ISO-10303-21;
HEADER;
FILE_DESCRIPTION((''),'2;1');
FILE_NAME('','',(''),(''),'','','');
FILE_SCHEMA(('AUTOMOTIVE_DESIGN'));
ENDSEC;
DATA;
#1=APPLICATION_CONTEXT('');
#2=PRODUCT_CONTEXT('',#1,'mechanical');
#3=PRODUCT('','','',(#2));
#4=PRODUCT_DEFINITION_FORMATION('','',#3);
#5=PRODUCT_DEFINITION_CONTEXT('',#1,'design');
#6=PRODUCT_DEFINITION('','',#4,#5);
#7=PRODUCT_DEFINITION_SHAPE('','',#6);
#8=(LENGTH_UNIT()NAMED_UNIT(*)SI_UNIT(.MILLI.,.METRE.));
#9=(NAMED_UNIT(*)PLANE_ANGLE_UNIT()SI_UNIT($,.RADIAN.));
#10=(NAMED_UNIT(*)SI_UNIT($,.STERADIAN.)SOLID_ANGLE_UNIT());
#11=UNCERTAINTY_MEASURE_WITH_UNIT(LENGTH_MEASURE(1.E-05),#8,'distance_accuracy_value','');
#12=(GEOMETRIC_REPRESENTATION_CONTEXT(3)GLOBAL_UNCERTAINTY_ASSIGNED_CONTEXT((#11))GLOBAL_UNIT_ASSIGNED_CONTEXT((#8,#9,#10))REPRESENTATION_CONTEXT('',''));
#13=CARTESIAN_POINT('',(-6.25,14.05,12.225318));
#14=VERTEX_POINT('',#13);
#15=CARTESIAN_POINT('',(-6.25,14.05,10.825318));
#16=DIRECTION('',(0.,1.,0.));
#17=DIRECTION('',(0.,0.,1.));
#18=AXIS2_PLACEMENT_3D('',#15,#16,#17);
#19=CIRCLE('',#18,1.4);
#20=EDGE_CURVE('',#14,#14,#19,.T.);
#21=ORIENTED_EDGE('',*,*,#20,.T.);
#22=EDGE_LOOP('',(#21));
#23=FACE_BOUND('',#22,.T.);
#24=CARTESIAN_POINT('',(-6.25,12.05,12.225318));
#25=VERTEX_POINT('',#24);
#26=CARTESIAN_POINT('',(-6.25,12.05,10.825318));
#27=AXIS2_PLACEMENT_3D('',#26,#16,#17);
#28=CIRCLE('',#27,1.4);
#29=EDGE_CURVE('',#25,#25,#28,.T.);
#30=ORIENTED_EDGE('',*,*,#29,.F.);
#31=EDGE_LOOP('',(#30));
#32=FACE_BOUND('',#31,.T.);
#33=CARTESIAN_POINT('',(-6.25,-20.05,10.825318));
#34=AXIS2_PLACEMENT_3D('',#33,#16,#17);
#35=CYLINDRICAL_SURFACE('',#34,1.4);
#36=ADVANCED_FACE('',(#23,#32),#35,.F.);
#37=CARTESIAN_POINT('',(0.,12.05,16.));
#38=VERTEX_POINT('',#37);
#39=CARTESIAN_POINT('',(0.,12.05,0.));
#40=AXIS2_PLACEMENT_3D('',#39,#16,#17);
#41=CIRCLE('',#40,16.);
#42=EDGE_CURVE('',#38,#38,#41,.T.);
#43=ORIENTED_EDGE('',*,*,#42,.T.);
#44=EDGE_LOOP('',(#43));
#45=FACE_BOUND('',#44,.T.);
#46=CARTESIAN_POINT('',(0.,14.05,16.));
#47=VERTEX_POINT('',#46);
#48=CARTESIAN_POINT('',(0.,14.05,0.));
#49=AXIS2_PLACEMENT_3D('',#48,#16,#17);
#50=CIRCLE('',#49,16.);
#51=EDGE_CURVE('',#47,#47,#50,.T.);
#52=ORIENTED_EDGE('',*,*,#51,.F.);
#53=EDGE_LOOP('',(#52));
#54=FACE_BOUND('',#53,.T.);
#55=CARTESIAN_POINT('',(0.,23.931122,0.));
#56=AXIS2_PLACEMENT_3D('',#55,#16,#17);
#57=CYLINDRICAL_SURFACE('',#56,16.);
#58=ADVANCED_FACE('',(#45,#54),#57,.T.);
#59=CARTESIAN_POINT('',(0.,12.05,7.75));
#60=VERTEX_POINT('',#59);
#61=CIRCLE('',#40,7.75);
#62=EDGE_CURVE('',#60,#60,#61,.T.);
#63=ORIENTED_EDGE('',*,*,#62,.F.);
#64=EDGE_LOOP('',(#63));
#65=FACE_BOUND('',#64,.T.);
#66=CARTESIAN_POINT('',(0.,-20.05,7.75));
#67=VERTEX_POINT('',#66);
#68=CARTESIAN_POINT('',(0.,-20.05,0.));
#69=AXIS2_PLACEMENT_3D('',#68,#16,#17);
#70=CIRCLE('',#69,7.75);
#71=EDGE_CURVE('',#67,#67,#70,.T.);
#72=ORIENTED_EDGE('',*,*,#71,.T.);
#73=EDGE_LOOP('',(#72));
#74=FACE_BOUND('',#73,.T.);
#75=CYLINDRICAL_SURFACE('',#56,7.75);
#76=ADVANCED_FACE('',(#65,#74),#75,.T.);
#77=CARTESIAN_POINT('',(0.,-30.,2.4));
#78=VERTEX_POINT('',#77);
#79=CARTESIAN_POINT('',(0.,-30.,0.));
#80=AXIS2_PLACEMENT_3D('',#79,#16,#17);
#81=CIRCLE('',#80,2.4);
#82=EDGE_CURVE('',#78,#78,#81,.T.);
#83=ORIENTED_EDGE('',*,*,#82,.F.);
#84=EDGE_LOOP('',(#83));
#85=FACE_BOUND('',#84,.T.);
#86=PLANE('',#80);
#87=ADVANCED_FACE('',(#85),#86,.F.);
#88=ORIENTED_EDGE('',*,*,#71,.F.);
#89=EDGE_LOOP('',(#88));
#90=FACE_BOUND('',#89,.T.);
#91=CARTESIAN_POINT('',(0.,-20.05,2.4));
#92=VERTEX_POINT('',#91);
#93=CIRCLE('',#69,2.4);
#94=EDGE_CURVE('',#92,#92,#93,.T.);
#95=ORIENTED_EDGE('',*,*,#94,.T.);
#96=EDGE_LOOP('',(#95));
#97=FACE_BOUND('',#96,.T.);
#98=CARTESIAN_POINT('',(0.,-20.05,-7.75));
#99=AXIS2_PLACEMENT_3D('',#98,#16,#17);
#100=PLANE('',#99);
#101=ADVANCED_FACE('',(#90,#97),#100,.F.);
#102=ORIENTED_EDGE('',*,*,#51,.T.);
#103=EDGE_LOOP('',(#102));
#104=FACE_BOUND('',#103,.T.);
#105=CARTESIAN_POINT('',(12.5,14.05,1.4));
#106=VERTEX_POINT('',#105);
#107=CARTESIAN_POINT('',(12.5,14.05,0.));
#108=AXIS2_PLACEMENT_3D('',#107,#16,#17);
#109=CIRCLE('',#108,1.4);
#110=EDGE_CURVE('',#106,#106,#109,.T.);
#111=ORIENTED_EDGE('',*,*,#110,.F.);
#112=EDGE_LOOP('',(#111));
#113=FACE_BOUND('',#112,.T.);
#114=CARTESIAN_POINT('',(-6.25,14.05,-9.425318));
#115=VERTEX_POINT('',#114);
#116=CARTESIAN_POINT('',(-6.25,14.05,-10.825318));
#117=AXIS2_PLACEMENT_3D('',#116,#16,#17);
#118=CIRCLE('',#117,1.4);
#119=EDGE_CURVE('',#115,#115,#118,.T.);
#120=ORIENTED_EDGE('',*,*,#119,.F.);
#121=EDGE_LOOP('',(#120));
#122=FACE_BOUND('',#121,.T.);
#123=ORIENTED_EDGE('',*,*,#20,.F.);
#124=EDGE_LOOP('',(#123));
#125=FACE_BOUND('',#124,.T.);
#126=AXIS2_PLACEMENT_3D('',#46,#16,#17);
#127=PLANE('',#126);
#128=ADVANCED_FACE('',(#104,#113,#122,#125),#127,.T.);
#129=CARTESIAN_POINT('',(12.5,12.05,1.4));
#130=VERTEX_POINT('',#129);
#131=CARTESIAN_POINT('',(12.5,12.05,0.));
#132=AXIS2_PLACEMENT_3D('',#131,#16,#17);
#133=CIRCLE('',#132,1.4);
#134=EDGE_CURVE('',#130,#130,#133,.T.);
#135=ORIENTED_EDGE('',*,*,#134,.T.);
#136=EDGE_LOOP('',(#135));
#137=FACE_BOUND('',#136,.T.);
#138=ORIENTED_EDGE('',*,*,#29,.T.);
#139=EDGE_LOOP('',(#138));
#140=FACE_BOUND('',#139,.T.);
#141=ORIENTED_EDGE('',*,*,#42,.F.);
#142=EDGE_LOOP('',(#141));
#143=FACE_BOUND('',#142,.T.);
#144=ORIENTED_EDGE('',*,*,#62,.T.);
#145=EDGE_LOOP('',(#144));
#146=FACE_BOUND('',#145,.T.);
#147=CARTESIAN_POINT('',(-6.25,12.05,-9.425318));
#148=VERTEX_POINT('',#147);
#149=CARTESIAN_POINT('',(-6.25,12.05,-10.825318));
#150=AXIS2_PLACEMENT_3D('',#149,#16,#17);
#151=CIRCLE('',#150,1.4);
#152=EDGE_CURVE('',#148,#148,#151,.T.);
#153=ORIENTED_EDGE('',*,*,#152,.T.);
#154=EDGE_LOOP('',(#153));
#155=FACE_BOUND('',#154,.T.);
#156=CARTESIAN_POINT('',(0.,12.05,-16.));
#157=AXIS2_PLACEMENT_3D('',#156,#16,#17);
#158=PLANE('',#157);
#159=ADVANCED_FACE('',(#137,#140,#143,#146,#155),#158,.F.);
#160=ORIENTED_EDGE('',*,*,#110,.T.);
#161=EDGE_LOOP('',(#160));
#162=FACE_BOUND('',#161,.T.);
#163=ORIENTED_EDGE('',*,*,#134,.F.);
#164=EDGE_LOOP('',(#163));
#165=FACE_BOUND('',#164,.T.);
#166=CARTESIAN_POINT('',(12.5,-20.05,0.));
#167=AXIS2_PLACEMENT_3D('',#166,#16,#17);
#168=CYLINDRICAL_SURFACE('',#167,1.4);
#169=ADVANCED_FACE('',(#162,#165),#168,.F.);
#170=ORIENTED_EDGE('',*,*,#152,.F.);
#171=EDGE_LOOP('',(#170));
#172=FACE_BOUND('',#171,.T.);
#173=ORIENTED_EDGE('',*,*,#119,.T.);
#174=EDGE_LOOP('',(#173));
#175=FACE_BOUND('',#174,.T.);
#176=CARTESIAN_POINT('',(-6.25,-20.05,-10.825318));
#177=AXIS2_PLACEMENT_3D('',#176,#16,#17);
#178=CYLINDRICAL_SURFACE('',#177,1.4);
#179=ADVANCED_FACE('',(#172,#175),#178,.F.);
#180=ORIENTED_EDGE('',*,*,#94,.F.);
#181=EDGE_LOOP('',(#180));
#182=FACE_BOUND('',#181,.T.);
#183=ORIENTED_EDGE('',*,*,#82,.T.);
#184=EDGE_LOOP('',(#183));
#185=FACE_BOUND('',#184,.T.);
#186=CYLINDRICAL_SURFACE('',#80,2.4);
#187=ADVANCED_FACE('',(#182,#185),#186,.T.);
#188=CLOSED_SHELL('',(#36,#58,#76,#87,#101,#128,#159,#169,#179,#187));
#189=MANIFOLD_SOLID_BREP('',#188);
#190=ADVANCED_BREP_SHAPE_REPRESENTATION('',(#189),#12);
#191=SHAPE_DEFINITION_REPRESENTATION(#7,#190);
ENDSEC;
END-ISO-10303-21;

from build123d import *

# Parameters (mm, degrees)
CUT_EXTRUDE1_DEPTH      = 41.924442574
CUT_EXTRUDE1_DEPTH_BACK = 41.924442574
SKETCH2_R               = 1.4
SKETCH4_R               = 2.4


with BuildPart() as part:
    # Sketch1 → Revolve1 (revolve)
    with BuildSketch(Plane(origin=(0, 0, 0), x_dir=(0, 0, -1), z_dir=(1, 0, 0))):
        Polygon((0, 20.05), (2.95, 20.05), (2.95, 14.05), (16, 14.05), (16, 12.05), (7.75, 12.05), (7.75, -20.05), (0, -20.05), align=None)
    revolve(axis=Axis((0, 23.931122449, 0), (0, -1, 0)))

    # Sketch2 → Cut-Extrude1 (cut, two sides: drawn at the far end of the back side and taken through both)
    with BuildSketch(Plane(origin=(0, 14.05, 0), x_dir=(1, 0, 0), z_dir=(0, 1, 0)).offset(-CUT_EXTRUDE1_DEPTH_BACK)):
        with Locations((12.5, 0)):
            Circle(SKETCH2_R)
        with Locations((-6.25, -10.825317547)):
            Circle(SKETCH2_R)
        with Locations((-6.25, 10.825317547)):
            Circle(SKETCH2_R)
    extrude(amount=CUT_EXTRUDE1_DEPTH + CUT_EXTRUDE1_DEPTH_BACK, mode=Mode.SUBTRACT)

    # Sweep1: sweep along a path in Sketch5
    with BuildLine(Plane(origin=(0, 0, 0), x_dir=(0, 0, -1), z_dir=(1, 0, 0))) as sweep1_path:
        Line((30, 52.05), (30, 32.05))
        ThreePointArc((30, 32.05), (28.242640687, 27.807359313), (24, 26.05))
        Line((24, 26.05), (6, 26.05))
        ThreePointArc((6, 26.05), (1.757359313, 24.292640687), (0, 20.05))
        Line((0, 20.05), (0, 0))
        Line((0, 0), (0, -30))
    # Sketch4 → Sweep1 (sweep)
    with BuildSketch(Plane(origin=(0, 0, 0), x_dir=(1, 0, 0), z_dir=(0, 1, 0))):
        Circle(SKETCH4_R)
    sweep(path=sweep1_path.line)


with BuildPart() as body_2:
    # Split2: the piece on the far side of the plane
    add(part.part)
    split(bisect_by=Plane(origin=(0, 14.05, -2.95), x_dir=(0, 0, -1), z_dir=(0, -1, 0)), keep=Keep.BOTTOM)


with BuildPart() as part_1:
    add(part.part)

    # Split2
    split(bisect_by=Plane(origin=(0, 14.05, -2.95), x_dir=(0, 0, -1), z_dir=(0, -1, 0)), keep=Keep.TOP)


solid = part_1.part
